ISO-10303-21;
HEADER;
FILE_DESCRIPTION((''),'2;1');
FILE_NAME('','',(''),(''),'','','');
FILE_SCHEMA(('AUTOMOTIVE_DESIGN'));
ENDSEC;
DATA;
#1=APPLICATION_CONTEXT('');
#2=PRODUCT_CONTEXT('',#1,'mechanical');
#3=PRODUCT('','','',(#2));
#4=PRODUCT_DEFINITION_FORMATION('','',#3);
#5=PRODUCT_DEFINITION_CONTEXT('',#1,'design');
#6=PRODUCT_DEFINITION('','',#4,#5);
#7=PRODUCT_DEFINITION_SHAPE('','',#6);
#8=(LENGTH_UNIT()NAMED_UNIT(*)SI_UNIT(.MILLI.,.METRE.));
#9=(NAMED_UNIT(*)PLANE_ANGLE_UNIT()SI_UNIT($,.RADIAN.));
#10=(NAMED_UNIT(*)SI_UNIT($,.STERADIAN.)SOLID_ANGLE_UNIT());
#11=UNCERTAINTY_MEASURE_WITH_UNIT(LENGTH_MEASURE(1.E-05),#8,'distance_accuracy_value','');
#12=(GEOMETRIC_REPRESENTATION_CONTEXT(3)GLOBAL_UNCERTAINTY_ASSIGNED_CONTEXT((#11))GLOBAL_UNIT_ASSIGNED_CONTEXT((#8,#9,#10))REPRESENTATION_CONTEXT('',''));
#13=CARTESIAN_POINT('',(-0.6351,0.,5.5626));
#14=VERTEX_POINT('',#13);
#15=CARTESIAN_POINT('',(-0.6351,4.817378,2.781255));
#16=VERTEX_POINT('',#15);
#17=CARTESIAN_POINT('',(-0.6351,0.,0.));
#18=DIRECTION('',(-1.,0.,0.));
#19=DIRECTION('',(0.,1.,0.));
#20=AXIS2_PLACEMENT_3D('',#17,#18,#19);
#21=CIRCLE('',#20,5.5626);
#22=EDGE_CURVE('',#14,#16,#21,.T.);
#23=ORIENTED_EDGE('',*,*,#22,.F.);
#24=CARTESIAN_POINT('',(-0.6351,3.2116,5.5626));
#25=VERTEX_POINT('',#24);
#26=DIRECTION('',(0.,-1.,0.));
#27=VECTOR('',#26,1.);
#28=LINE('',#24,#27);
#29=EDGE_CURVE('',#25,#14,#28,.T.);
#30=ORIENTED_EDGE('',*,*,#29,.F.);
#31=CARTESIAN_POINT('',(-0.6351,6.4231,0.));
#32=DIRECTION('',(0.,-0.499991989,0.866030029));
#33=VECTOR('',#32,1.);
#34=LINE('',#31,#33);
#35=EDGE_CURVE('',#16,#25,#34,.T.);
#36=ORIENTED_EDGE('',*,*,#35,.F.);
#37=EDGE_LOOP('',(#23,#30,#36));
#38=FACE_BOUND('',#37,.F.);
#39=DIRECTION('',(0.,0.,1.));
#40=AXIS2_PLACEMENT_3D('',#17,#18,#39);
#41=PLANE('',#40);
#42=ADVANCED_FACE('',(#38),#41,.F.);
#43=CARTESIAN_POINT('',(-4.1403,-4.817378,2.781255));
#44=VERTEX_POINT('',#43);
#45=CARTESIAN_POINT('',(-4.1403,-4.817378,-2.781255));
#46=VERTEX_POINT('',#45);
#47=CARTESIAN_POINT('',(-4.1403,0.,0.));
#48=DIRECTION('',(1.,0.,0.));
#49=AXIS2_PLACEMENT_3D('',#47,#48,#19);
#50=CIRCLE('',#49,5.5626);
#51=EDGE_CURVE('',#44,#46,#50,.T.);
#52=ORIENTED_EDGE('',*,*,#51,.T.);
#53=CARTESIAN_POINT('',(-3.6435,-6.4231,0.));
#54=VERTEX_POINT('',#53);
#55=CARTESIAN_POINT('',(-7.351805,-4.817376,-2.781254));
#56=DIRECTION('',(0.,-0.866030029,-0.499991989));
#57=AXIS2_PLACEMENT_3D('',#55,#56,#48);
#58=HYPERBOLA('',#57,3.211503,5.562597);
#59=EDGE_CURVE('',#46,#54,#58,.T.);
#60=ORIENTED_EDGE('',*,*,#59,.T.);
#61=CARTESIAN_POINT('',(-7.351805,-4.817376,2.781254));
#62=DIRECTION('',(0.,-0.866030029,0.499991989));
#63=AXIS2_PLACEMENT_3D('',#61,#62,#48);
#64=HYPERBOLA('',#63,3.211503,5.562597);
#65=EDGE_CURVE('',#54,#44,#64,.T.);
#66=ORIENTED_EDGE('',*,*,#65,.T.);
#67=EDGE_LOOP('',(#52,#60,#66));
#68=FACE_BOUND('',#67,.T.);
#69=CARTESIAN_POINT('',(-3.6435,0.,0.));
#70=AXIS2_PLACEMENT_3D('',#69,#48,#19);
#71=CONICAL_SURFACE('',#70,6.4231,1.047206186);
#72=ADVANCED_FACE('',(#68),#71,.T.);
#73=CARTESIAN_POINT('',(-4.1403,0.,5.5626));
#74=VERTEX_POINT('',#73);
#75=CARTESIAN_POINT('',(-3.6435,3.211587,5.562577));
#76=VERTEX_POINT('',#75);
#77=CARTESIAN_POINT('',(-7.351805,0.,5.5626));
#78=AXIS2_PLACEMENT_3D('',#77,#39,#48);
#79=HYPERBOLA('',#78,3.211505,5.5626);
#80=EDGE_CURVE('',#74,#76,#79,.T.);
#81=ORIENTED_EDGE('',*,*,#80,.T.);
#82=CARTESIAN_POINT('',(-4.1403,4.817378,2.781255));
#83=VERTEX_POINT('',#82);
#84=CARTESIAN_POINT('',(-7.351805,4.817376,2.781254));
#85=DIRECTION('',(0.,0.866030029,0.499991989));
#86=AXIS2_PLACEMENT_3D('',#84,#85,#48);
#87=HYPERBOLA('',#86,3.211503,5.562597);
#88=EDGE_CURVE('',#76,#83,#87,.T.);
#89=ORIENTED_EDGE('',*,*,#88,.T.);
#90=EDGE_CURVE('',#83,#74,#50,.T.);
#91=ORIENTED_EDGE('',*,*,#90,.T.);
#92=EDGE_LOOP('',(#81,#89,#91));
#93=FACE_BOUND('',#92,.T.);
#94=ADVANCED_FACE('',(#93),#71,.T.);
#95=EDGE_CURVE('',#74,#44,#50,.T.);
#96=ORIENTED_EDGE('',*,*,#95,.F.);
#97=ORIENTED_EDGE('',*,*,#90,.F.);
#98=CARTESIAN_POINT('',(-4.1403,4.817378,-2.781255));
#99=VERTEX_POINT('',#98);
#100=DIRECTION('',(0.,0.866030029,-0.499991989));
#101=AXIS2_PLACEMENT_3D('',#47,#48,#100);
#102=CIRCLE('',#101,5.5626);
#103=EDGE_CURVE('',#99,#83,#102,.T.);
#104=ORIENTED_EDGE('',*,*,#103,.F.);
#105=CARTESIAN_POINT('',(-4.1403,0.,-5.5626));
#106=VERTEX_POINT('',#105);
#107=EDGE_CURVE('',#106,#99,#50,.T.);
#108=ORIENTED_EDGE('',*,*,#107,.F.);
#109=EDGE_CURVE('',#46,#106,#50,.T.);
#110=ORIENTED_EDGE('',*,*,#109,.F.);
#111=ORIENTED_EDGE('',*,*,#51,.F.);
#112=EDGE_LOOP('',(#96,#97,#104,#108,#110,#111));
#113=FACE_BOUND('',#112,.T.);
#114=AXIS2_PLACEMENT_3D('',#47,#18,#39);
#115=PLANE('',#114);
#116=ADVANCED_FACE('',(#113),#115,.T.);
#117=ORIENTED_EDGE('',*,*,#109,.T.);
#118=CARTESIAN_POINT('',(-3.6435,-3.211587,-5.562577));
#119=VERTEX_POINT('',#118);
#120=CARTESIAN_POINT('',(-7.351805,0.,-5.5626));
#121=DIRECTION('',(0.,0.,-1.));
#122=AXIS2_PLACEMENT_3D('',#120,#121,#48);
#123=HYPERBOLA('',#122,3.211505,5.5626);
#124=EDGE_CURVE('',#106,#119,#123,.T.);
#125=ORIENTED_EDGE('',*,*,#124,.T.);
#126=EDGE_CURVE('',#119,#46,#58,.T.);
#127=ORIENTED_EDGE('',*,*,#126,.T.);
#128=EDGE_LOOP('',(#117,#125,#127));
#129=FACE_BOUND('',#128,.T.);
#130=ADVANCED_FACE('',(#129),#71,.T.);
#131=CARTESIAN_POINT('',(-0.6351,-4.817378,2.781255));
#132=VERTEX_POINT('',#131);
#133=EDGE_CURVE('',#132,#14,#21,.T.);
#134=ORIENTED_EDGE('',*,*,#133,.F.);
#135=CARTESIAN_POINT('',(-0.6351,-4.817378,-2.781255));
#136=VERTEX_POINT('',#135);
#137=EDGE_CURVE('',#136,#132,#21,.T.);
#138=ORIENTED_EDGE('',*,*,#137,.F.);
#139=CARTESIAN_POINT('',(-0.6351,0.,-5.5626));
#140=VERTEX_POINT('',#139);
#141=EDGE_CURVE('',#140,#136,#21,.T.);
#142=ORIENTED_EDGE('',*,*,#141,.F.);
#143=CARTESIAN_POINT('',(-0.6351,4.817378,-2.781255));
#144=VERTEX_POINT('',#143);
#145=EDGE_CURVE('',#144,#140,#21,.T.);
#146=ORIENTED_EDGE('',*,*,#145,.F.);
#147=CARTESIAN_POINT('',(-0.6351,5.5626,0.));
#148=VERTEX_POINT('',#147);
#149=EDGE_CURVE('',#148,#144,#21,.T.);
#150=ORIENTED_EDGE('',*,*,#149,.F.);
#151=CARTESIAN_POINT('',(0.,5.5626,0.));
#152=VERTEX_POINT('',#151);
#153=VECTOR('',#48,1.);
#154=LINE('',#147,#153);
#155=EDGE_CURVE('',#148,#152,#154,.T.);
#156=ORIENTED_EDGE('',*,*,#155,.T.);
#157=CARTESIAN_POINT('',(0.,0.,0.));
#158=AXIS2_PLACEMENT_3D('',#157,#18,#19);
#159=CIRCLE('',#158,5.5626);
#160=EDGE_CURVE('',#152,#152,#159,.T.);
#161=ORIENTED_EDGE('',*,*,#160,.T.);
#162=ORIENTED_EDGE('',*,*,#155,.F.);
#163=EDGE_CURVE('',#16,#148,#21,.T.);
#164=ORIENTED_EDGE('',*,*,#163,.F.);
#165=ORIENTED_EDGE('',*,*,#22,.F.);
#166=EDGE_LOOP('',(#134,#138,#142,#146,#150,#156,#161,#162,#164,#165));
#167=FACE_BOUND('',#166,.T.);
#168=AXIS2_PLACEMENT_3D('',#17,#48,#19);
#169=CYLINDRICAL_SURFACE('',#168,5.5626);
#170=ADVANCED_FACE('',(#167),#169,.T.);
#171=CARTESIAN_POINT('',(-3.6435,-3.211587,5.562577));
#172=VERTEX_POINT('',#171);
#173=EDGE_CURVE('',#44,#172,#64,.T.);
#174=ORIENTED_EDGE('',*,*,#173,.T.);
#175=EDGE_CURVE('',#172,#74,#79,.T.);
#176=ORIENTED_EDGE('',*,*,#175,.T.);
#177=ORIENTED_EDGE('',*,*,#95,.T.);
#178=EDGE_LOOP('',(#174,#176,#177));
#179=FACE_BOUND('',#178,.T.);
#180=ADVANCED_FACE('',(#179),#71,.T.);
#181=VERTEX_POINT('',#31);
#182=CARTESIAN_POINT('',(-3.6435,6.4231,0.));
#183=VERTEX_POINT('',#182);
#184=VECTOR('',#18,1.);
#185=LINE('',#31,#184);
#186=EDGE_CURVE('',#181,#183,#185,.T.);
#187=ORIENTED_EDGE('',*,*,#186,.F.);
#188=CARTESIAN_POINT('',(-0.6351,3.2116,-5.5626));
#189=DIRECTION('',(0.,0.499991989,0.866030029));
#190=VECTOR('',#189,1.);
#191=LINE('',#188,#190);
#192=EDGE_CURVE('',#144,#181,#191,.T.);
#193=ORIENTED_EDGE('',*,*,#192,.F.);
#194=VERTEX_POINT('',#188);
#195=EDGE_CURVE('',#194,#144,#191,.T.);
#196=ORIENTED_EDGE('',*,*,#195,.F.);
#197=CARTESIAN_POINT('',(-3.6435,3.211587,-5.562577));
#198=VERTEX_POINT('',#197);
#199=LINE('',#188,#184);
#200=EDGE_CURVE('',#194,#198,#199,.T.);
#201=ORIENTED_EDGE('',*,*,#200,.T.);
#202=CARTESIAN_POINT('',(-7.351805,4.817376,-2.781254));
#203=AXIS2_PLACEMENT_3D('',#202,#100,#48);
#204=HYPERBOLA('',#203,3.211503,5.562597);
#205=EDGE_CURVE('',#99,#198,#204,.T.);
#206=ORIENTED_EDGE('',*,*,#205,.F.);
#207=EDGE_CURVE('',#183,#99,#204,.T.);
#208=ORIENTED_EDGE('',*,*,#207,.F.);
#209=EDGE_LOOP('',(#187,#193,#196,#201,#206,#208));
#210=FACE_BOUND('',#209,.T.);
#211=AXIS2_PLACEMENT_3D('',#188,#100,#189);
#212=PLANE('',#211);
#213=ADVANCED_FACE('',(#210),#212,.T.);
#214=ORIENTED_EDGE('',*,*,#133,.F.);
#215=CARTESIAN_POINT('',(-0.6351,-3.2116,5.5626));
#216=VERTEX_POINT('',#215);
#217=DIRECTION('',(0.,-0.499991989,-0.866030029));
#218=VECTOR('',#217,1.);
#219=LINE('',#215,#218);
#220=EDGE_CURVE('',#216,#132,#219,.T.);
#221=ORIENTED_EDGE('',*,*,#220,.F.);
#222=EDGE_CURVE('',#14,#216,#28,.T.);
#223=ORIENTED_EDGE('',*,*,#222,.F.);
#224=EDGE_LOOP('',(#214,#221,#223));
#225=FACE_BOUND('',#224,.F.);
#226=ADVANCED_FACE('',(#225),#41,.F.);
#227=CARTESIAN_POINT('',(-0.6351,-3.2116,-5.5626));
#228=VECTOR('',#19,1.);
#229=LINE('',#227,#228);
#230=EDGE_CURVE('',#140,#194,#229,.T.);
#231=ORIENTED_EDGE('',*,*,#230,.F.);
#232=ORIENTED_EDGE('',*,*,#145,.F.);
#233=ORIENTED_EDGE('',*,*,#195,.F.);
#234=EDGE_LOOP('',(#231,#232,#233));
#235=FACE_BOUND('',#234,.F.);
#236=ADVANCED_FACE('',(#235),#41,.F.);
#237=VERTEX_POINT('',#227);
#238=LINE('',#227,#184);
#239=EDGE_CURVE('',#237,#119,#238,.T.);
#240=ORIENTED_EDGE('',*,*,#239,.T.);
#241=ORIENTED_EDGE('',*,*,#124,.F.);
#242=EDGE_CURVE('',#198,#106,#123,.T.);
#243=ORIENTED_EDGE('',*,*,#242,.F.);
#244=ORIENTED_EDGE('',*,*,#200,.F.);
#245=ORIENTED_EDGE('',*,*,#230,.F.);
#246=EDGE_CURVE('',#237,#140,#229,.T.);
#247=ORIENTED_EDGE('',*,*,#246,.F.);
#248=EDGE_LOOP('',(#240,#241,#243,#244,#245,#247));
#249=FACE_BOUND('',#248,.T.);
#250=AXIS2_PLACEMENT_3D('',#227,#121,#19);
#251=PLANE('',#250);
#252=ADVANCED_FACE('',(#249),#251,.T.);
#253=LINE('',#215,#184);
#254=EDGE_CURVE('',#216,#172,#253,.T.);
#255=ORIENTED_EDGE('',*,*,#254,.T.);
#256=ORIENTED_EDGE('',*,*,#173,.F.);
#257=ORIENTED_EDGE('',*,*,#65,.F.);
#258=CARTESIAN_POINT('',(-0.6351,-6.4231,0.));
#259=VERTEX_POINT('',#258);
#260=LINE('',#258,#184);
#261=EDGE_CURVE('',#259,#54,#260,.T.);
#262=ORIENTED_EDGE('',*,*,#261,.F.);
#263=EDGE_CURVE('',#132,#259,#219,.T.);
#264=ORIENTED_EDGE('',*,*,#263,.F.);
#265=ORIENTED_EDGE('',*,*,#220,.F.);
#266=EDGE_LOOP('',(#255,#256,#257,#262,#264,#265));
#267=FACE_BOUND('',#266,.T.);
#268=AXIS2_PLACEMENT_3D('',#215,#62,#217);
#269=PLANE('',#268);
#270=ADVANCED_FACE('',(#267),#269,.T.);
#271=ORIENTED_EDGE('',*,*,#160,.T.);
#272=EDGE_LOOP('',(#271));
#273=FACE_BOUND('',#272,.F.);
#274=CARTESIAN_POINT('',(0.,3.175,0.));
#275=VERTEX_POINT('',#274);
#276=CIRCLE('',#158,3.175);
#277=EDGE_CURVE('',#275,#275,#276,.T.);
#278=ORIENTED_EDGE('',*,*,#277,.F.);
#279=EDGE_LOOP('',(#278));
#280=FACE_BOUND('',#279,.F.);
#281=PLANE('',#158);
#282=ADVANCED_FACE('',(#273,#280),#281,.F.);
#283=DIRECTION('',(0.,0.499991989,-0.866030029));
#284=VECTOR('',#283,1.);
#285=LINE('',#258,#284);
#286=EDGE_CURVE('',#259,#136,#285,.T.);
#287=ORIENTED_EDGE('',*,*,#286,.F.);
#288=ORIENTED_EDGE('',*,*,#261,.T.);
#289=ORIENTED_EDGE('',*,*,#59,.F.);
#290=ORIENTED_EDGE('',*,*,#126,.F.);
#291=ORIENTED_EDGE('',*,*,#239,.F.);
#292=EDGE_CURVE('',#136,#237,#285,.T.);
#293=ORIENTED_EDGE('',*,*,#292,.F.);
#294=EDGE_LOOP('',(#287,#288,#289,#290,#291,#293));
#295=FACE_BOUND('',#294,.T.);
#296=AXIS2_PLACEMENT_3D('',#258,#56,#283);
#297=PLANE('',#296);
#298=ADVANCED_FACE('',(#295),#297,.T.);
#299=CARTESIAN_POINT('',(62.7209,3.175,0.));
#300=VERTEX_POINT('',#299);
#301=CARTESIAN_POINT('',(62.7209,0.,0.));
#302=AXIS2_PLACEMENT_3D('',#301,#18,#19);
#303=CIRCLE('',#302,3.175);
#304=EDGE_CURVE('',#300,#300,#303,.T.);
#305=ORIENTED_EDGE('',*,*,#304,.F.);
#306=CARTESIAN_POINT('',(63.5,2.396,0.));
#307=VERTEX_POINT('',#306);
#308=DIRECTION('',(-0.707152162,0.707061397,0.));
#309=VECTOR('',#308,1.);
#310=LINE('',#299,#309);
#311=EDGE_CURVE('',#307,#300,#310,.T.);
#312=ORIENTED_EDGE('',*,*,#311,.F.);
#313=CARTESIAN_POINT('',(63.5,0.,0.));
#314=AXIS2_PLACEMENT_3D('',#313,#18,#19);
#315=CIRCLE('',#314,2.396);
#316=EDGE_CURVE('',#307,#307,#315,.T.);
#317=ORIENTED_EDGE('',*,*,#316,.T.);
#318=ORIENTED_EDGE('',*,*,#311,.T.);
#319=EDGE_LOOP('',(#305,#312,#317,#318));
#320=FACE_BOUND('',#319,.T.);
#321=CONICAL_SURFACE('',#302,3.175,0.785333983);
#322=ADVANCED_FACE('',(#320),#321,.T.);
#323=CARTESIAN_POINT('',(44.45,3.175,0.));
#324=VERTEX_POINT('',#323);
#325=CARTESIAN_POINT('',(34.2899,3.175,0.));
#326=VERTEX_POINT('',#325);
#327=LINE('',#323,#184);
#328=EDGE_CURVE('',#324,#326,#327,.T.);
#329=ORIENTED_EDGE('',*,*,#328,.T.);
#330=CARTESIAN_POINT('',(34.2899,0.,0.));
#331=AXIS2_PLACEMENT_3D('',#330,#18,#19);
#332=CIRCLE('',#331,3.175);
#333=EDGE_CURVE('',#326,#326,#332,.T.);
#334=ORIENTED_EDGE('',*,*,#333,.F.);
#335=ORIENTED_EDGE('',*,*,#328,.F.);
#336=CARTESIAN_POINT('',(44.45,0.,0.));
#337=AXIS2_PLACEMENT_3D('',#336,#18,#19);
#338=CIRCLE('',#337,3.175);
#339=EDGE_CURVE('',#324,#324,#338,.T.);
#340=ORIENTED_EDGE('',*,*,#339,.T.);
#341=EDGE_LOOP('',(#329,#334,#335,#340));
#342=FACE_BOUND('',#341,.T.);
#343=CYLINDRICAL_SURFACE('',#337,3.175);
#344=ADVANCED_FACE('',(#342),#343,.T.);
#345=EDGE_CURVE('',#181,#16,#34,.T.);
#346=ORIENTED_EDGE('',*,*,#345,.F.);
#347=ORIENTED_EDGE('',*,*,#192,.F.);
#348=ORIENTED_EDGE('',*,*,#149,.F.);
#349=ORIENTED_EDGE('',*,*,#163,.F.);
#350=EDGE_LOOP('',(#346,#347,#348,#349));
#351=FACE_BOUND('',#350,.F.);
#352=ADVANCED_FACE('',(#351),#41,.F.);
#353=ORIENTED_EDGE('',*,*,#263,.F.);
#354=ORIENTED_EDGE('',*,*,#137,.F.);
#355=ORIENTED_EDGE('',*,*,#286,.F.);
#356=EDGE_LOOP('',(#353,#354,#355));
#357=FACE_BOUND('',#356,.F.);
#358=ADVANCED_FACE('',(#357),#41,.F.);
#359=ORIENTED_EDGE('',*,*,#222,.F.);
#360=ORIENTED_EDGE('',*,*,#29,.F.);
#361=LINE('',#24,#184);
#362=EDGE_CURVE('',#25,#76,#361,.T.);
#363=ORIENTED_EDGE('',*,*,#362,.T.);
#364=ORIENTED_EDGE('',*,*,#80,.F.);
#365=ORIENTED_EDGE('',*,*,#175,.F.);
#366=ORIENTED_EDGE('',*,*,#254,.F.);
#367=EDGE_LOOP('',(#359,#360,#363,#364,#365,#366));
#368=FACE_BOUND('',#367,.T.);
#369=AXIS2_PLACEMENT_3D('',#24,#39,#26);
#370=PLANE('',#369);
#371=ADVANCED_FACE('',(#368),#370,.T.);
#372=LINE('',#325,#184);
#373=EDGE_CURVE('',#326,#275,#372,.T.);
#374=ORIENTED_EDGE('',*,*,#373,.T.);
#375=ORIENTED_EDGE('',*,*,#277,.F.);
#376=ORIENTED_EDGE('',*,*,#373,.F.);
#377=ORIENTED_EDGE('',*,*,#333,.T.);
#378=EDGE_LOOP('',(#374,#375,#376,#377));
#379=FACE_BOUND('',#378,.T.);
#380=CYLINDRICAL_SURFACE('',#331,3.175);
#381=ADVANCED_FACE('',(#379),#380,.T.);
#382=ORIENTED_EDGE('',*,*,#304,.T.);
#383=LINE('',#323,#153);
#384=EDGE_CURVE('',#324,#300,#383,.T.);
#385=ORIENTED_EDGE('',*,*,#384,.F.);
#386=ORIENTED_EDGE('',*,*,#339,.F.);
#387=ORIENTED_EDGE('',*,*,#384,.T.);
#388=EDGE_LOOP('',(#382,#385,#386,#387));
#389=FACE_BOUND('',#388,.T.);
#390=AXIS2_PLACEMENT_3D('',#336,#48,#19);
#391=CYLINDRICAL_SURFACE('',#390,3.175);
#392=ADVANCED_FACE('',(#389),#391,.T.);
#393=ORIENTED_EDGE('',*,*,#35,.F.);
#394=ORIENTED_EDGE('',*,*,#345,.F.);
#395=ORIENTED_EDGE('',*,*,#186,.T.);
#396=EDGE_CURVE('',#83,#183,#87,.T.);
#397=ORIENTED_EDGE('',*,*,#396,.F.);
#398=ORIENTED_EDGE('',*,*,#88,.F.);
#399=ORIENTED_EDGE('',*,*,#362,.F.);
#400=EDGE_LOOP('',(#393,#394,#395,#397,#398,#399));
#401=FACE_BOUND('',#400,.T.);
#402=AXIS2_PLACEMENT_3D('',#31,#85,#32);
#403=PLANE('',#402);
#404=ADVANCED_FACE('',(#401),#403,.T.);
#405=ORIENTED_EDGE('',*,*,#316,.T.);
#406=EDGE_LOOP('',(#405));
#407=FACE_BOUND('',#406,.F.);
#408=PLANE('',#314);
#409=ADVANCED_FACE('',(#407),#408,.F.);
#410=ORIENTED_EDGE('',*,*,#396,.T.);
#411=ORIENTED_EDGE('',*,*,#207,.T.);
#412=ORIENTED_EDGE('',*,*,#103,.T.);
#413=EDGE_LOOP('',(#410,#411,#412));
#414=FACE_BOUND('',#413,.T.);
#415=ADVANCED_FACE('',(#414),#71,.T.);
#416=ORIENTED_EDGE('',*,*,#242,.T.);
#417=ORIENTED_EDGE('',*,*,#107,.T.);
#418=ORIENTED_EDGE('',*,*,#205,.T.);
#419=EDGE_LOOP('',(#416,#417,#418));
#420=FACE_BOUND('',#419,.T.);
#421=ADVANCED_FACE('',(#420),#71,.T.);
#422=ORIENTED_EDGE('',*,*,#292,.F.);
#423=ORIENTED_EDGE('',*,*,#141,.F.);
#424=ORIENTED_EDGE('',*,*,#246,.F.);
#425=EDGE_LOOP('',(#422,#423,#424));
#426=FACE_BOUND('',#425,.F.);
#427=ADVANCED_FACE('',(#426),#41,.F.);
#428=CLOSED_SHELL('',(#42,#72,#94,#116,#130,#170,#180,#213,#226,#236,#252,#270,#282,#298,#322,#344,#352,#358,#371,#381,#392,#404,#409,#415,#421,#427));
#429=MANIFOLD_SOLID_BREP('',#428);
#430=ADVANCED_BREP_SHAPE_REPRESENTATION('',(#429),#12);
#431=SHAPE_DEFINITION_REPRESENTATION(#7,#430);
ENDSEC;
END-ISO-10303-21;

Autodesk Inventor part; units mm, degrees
ref_plane "YZ Plane" through (0, 0, 0) normal (1, 0, 0) x (0, 1, 0)
ref_plane "XZ Plane" through (0, 0, 0) normal (0, 1, 0) x (-1, 0, 0)
sketch "Sketch1" plane through (0, 0, 0) normal (0, 0, 1) x (1, 0, 0)
  line L0 (0, 5.5626) -> (0, 3.175)
  line L1 (44.45, 3.175) -> (63.5, 3.175)
  line L2 (63.5, 3.175) -> (63.5, 0)
  line L3 (63.5, 0) -> (-0.6351, 0)
  line L4 (-13.4621, 0) -> (76.327, 0) projected
  line L5 (-0.6351, 0) -> (-0.6351, 5.5626)
  line L6 (-0.6351, 5.5626) -> (0, 5.5626)
  line L7 (44.45, 3.175) -> (34.2899, 3.175)
  line L8 (34.2899, 3.175) -> (0, 3.175)
  line L9 (0, -1.1125) -> (0, 6.6751) projected
  dimension "d0" = 63.5
  dimension "d1" = 19.05
  dimension "d2" = 6.35
  dimension "d9" = 0.6351
  dimension "d10" = 11.1252
  dimension "d13" = 10.1601
  dimension "d14" = 6.35
revolve "Body" add sketch "Sketch1" angle 360 about axis through (63.5, 0, 0) along (-1, 0, 0)
sketch "Sketch2" plane through (-0.6351, 0, 0) normal (-1, 0, 0) x (0, 0, 1)
  line L0 (0, 6.4231) -> (5.5626, 3.2116)
  line L1 (5.5626, 3.2116) -> (5.5626, -3.2116)
  line L2 (5.5626, -3.2116) -> (0, -6.4231)
  line L3 (0, -6.4231) -> (-5.5626, -3.2116)
  line L4 (-5.5626, -3.2116) -> (-5.5626, 3.2116)
  line L5 (-5.5626, 3.2116) -> (0, 6.4231)
  point P0 (0, 0)
  point P1 (0, 0)
  dimension "d11" = 11.1252
extrude "Head" add sketch "Sketch2" along normal blind 3.5052
sketch "Sketch4" plane through (0, 0, 0) normal (0, 0, 1) x (1, 0, 0)
  line L0 (-4.1403, 5.5626) -> (-4.1403, 6.4231)
  line L1 (-4.1403, 6.4231) -> (-3.6435, 6.4231)
  line L2 (-3.6435, 6.4231) -> (-4.1403, 5.5626)
  line L3 (-4.8413, 0) -> (0.0659, 0) projected
  line L4 (-0.6351, 6.4231) -> (-4.1403, 6.4231) projected
  line L5 (-4.1403, 3.2116) -> (-4.1403, 6.4231) projected
  dimension "d5" = 30
  dimension "d19" = 11.1252
revolve "Chamfer1" cut sketch "Sketch4" angle 360 about axis through (-10, 0, 0) along (1, 0, 0)
thread "Thread" size "1/4-20 UNC" class "2A" standard "ANSI Unified Screw Threads" length 19.05
chamfer "Chamfer2" distance 0.779 distance2 0.7791 1 edges at (63.5, -3.175, 0) measured on face at (63.5, 0.7461, -0.3226)
ref_plane "Work Plane1" through (1.525, 0, 0) normal (0, 0, 1) x (1, 0, 0)
equation "\"d0\" = NLG"
equation "\"d1\" = GEL"
equation "\"d2\" = GD"
equation "\"d10\" = SD2"
equation "\"d14\" = BDM"
equation "\"d11\" = SW"
equation "\"d3\" = KOH - SD"
equation "\"d5\" = ANG1"
equation "\"d19\" = SW0"
equation "\"d15\" = GEL"
equation "\"d6\" = -0.5 * SPD + 0.5 * GD"
equation "\"NLG\" = 63.5"
equation "\"GD\" = 6.35"
equation "\"BDM\" = 6.35"
equation "\"KOH\" = 4.1402"
equation "\"GEL\" = 19.05"
equation "\"SW\" = 11.1252"
equation "\"SW0\" = SW"
equation "\"SPD\" = GD1"
equation "\"SD2\" = SW"
equation "\"SD\" = 0.635"
equation "\"ANG1\" = 30deg"
equation "\"GAL\" = 10.16"
equation "\"GUL\" = 0.77902"
equation "\"RR\" = 0.381"
equation "\"WFT\" = SD"
equation "\"GD1\" = 4.79196"
equation "\"THREADDIA\" = 6.35"
equation "\"SDH\" = SW"
equation "\"SDHG\" = 34.29"
equation "\"TOA\" = 30deg"
equation "\"FAWI\" = 45deg"
equation "\"NND\" = 6.35"
equation "\"E0\" = 12.84961"
properties part number "AS 2465 - 1/4 x 2 1/2  UNC" material "Steel, Mild"
